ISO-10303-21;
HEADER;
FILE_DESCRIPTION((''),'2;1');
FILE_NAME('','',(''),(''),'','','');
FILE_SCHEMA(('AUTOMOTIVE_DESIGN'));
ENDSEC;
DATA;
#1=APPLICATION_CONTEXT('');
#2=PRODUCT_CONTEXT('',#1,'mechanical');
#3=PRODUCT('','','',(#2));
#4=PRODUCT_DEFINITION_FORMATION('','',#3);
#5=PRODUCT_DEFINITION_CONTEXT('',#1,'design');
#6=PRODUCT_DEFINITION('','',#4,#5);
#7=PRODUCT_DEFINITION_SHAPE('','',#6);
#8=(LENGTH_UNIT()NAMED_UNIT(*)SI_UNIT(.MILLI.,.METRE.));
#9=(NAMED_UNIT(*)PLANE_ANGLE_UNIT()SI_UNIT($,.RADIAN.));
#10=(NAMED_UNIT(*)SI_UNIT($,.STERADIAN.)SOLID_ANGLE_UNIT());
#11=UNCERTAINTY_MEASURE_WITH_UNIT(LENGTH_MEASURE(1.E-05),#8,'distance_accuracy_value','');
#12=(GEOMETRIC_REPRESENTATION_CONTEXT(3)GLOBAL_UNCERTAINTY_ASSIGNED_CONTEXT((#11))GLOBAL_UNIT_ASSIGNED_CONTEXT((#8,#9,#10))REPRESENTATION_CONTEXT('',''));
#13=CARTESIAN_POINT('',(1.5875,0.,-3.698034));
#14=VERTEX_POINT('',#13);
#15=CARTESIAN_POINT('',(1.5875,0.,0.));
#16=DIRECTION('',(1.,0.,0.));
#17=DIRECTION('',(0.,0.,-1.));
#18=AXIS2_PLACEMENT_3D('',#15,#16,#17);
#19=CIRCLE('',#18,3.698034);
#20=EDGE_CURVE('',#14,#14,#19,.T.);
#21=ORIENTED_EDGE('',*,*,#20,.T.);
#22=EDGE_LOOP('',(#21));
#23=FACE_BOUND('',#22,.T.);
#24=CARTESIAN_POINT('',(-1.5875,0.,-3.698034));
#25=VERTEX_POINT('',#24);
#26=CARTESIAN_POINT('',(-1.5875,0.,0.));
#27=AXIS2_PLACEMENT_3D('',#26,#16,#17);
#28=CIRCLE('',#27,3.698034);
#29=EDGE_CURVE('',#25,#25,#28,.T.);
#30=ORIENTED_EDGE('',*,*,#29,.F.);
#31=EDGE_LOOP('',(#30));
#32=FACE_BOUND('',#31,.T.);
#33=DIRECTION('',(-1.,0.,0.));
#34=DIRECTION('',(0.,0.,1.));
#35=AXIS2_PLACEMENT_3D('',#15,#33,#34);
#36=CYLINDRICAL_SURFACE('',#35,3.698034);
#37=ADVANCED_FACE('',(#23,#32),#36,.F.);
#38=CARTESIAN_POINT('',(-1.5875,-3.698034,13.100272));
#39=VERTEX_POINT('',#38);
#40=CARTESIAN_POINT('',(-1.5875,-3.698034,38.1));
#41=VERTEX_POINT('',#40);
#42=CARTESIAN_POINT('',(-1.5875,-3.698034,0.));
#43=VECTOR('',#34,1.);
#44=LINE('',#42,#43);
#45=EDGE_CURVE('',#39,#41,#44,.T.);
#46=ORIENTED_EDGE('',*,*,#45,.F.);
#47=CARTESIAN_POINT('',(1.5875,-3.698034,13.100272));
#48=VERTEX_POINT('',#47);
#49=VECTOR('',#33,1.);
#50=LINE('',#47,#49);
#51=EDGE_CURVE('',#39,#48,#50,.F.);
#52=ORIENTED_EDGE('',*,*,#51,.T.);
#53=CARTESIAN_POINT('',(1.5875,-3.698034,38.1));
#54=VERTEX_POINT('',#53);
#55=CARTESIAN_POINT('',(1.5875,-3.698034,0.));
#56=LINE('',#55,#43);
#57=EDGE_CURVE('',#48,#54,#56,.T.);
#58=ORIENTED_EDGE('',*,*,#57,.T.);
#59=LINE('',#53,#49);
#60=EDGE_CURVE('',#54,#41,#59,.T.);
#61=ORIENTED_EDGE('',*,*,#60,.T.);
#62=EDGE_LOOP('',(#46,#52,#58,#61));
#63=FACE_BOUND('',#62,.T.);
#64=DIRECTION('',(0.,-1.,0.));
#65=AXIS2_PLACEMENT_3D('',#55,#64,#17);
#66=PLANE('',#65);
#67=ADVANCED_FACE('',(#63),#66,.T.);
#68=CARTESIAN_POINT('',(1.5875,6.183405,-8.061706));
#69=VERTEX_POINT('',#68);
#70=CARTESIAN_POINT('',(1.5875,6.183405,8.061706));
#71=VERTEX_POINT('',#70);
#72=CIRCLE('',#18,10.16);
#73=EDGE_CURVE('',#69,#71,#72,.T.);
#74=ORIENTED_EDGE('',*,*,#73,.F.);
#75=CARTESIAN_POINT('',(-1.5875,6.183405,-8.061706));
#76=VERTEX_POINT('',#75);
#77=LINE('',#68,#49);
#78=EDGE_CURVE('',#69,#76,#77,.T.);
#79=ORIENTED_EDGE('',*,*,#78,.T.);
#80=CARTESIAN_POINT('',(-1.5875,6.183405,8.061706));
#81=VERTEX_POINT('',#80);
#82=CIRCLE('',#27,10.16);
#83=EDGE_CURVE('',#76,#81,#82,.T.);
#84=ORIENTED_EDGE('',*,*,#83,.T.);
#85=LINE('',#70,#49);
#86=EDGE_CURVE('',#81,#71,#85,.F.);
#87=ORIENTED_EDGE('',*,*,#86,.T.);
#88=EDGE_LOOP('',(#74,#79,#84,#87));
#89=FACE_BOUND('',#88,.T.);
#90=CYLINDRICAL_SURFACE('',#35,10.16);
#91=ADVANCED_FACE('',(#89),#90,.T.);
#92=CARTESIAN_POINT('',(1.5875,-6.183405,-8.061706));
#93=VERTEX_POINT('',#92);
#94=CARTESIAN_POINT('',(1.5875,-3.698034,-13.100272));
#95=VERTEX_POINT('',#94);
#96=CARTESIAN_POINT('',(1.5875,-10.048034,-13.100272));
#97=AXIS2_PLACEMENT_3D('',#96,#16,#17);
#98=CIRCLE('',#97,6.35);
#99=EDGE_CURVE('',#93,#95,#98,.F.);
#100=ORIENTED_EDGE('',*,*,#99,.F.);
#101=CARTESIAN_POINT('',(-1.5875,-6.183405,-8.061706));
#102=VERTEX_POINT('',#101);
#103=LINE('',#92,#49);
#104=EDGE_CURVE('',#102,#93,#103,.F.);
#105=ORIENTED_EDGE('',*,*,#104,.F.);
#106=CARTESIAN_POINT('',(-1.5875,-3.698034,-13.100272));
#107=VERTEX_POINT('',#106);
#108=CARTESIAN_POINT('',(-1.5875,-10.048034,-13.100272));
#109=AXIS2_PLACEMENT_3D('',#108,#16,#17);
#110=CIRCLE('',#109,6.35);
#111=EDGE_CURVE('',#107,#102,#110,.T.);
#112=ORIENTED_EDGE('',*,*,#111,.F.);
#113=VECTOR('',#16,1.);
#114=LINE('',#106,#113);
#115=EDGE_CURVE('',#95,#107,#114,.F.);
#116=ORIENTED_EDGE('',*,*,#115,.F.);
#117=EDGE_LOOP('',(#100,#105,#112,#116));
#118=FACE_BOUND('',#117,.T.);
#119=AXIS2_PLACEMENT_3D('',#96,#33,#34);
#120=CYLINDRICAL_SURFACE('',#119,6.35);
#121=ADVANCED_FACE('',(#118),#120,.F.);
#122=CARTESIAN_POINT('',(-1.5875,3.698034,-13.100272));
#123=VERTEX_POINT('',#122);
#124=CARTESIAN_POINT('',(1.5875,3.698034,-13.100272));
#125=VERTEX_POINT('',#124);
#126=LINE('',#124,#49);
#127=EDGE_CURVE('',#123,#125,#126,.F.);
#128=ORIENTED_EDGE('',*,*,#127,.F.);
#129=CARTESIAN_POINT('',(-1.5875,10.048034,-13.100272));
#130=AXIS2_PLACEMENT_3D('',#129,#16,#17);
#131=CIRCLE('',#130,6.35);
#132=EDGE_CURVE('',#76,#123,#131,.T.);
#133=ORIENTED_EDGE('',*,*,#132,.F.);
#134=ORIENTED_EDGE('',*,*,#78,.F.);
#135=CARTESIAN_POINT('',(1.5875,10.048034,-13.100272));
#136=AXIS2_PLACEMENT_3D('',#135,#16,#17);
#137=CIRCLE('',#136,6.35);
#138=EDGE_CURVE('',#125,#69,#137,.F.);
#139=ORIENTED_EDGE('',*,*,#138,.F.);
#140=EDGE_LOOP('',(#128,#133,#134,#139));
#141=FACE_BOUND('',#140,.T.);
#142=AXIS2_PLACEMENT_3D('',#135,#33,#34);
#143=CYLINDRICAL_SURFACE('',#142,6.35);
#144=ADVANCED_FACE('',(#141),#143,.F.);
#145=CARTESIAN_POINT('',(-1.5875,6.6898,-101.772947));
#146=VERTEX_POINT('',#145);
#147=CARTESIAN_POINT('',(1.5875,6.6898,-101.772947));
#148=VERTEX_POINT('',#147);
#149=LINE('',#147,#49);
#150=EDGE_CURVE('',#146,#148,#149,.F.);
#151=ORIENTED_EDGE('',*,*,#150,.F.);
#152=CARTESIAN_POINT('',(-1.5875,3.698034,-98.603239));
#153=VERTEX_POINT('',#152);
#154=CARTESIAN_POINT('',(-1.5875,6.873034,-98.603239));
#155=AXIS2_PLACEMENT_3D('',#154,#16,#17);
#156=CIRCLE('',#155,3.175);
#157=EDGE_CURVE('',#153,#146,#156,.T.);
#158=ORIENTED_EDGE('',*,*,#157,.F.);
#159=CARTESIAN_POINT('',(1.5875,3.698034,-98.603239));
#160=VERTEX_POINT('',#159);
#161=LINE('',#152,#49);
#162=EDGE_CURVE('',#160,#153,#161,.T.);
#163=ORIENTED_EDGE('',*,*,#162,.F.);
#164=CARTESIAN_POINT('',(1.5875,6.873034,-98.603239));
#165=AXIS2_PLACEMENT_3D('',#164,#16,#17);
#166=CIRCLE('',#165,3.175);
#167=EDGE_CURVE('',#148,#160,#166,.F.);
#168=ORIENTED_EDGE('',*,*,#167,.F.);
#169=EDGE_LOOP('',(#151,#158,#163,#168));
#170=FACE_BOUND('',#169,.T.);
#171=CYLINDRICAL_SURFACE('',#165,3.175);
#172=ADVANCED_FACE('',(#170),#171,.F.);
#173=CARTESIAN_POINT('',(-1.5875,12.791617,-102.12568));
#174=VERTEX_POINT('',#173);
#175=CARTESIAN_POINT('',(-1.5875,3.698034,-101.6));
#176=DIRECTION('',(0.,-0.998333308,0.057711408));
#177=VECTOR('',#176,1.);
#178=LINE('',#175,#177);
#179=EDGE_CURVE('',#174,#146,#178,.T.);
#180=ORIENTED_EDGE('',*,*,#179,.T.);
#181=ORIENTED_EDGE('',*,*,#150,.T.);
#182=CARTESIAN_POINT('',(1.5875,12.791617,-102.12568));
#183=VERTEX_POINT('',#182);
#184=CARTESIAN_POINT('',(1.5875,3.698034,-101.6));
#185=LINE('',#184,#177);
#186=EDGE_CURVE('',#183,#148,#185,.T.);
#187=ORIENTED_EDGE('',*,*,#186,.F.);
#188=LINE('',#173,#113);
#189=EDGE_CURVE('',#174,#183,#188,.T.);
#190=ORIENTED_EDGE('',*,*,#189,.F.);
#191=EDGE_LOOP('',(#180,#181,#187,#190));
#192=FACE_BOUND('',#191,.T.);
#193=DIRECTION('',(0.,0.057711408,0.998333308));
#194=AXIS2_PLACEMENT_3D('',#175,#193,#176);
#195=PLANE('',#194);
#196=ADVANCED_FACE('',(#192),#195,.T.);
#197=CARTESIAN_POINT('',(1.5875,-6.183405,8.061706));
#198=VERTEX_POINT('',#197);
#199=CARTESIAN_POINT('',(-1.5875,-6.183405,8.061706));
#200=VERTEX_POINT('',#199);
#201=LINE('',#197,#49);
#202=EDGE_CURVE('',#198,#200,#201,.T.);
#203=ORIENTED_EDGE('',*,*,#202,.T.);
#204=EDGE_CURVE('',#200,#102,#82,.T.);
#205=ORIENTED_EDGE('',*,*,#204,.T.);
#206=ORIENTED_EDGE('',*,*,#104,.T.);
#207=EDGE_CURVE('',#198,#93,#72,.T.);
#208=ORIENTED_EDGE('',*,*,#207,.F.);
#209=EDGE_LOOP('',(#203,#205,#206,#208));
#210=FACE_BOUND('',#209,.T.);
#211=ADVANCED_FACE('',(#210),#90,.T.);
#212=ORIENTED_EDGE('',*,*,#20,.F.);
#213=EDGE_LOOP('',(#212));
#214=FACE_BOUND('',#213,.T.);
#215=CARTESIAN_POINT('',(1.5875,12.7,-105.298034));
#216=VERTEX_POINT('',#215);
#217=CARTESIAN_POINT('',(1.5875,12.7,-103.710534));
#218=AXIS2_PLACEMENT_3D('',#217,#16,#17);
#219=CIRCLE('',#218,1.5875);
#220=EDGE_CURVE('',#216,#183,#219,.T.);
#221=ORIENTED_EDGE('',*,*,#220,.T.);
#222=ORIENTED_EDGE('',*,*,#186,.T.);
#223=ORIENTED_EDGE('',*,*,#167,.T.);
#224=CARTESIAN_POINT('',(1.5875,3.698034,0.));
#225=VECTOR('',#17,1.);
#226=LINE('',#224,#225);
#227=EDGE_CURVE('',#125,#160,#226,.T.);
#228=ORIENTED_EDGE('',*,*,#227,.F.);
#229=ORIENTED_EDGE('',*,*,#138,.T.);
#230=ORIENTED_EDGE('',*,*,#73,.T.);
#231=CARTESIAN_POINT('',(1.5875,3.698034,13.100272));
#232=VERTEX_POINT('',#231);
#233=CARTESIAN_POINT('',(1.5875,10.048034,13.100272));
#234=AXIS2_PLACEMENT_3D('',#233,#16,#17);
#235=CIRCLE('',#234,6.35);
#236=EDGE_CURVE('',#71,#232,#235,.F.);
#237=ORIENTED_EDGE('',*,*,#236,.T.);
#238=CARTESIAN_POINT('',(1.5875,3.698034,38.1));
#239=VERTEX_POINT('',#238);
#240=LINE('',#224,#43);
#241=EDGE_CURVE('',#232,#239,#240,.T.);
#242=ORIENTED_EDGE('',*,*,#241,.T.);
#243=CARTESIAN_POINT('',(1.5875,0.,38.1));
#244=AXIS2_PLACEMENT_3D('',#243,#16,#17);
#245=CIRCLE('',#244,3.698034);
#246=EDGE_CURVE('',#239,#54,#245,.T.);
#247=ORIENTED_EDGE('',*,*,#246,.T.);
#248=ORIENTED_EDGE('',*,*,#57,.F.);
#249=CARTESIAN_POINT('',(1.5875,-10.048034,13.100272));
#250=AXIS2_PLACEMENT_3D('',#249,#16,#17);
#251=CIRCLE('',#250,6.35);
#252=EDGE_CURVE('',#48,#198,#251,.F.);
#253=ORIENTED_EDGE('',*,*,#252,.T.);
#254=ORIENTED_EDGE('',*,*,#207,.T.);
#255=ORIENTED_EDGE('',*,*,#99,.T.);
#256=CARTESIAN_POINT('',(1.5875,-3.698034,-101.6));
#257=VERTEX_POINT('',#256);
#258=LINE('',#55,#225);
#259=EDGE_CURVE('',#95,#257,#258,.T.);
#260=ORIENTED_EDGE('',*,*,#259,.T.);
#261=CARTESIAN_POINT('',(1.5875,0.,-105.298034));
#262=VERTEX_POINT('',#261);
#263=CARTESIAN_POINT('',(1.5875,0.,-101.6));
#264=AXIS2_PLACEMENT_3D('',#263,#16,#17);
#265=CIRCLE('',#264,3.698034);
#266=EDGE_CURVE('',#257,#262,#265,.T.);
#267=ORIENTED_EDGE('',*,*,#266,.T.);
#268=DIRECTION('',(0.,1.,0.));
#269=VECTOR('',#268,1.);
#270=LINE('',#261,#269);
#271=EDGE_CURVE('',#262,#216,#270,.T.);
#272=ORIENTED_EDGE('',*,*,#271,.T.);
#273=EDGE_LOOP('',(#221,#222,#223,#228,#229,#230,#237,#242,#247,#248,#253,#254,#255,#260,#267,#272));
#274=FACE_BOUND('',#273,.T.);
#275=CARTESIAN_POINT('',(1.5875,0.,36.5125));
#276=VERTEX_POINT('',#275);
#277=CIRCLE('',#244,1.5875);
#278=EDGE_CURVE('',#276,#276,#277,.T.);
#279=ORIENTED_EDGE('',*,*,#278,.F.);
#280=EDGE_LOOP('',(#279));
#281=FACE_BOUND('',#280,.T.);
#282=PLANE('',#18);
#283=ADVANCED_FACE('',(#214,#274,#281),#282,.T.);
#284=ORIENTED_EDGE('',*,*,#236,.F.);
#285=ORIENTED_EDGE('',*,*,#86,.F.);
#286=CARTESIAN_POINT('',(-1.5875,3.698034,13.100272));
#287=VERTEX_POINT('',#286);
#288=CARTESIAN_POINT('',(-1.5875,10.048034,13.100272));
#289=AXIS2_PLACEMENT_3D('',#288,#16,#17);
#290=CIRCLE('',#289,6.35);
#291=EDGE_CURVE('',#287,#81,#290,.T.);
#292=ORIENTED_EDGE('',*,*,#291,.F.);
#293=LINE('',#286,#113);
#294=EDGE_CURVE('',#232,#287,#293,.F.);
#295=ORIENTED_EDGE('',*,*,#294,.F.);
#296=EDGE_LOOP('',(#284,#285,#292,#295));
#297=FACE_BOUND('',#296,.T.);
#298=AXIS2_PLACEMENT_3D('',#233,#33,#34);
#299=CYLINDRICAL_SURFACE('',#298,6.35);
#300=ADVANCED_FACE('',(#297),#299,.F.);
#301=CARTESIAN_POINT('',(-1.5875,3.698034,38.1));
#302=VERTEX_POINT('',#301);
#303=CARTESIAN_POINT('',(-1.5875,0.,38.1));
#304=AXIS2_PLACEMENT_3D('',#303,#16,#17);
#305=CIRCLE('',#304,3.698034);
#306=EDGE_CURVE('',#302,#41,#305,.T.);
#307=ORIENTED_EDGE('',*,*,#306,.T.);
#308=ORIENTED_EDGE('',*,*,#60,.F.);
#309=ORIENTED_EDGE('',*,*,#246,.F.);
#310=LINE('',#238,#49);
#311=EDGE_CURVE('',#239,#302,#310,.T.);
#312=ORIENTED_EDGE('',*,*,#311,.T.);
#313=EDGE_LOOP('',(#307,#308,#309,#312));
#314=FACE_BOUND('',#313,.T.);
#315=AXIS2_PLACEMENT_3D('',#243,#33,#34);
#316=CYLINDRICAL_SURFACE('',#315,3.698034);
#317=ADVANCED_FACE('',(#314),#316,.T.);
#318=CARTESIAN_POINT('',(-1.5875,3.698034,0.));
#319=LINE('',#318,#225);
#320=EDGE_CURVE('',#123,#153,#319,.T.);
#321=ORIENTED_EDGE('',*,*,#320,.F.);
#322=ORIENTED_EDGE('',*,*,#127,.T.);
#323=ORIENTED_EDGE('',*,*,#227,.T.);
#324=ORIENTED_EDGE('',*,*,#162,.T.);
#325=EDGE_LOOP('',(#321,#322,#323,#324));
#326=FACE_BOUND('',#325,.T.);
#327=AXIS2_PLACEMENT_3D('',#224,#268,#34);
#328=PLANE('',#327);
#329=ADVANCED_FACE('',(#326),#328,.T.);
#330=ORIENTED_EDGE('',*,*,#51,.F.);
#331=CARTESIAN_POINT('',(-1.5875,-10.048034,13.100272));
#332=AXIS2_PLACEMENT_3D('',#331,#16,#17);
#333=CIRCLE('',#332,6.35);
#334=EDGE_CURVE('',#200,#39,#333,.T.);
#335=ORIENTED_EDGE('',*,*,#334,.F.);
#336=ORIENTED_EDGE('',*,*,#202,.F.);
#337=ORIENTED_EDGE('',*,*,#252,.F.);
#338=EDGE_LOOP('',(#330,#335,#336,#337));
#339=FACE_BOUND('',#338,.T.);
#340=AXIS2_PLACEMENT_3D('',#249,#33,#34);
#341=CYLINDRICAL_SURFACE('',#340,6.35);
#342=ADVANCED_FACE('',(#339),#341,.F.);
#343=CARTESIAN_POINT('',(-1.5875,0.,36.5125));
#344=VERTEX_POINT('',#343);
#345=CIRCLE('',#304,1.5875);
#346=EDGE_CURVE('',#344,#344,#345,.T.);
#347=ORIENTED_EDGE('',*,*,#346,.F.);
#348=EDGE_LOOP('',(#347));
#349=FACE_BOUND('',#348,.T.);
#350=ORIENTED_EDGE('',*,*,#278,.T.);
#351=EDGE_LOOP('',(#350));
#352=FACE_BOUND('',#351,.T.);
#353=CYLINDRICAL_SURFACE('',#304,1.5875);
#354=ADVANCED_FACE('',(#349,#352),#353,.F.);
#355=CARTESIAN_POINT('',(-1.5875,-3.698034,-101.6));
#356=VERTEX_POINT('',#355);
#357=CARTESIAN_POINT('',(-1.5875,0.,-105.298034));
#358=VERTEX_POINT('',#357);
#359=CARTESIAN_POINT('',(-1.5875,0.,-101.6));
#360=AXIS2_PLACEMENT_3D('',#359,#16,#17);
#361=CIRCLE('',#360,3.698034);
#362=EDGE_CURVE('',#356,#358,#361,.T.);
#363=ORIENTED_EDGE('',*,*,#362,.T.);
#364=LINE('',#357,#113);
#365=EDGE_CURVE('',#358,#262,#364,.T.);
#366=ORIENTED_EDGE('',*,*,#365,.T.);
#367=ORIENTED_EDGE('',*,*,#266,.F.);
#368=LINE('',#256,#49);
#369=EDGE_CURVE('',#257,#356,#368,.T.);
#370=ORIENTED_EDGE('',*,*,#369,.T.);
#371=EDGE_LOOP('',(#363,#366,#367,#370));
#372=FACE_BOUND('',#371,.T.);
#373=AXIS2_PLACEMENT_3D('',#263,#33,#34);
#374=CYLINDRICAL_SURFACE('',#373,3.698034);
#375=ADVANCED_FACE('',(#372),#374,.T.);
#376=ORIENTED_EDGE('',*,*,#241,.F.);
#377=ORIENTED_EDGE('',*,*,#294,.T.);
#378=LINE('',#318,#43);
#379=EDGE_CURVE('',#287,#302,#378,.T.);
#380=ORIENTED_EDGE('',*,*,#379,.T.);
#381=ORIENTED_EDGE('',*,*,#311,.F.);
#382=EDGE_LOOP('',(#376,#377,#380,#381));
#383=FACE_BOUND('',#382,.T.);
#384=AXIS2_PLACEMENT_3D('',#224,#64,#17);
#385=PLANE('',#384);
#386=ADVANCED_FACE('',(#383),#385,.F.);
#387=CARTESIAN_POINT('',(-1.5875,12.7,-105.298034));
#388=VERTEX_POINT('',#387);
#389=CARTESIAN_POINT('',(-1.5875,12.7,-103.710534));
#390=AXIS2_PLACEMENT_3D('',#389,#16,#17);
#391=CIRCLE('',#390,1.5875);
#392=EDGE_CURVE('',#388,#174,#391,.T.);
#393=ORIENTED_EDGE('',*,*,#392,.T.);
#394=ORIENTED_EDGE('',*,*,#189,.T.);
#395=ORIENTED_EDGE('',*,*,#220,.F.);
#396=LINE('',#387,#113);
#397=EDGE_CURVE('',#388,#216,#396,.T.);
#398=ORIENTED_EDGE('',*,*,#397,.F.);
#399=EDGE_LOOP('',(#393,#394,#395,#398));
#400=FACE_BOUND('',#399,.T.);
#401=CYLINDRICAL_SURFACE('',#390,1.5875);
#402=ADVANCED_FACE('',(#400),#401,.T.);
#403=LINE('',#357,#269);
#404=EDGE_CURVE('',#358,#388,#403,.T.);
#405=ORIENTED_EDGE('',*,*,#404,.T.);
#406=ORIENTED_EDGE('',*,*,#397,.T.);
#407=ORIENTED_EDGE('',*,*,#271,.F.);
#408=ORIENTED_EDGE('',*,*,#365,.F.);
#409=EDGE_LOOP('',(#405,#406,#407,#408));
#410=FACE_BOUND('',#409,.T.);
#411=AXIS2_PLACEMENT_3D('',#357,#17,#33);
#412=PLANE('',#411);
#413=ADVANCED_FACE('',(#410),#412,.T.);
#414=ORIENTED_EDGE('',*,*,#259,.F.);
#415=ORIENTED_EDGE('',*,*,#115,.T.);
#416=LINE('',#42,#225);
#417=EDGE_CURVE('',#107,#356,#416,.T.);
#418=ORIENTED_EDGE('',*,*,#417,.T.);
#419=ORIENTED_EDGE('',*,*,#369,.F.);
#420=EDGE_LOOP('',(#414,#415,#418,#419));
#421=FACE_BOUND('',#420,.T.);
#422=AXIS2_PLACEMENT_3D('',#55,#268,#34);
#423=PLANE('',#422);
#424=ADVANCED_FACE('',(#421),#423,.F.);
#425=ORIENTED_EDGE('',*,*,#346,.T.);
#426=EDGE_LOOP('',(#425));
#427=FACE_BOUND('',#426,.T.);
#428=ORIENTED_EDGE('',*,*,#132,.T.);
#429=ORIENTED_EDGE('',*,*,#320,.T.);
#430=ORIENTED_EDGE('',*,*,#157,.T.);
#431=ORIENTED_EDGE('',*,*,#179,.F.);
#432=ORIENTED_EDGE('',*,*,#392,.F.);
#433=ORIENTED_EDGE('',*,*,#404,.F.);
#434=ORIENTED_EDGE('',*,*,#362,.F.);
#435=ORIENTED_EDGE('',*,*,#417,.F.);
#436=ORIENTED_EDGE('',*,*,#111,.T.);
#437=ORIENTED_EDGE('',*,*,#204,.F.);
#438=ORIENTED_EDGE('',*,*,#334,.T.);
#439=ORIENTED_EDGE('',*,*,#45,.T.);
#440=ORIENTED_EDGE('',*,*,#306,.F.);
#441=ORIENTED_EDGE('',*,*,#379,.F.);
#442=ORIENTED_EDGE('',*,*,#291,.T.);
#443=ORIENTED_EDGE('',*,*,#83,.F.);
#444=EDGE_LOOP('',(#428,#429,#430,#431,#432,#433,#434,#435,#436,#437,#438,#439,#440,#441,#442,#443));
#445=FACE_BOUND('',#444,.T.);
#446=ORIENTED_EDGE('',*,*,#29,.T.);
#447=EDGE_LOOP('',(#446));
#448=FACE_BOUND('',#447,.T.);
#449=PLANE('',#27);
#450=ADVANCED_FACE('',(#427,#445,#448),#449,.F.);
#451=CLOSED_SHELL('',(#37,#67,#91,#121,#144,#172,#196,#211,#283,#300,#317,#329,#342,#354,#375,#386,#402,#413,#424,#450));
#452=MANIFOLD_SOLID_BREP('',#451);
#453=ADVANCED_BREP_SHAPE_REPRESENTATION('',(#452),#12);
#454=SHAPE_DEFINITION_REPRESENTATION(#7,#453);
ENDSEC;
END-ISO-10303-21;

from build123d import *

# Parameters (mm, degrees)
SKETCH1_R               = 3.698033758
BOSS_EXTRUDE1_DEPTH     = 1.5875
FILLET1_R               = 6.35
BOSS_EXTRUDE2_DEPTH     = 1.5875
FILLET2_R               = 3.175
CUT_EXTRUDE1_DEPTH      = 107.31034378
CUT_EXTRUDE1_DEPTH_BACK = 107.31034378
SKETCH3_R               = 1.5875


with BuildPart() as part:
    # Sketch1 → Boss-Extrude1 (new, symmetric)
    with BuildSketch(Plane(origin=(0, 0, 0), x_dir=(0, 0, -1), z_dir=(1, 0, 0))):
        with BuildLine():
            ThreePointArc((-9.463093909, -3.698033758), (0, -10.16), (9.463093909, -3.698033758))
            Line((9.463093909, -3.698033758), (101.6, -3.698033758))
            ThreePointArc((101.6, -3.698033758), (105.298033758, 0), (101.6, 3.698033758))
            Line((101.6, 3.698033758), (9.463093909, 3.698033758))
            ThreePointArc((9.463093909, 3.698033758), (0, 10.16), (-9.463093909, 3.698033758))
            Line((-9.463093909, 3.698033758), (-38.1, 3.698033758))
            ThreePointArc((-38.1, 3.698033758), (-41.798033758, 0), (-38.1, -3.698033758))
            Line((-38.1, -3.698033758), (-9.463093909, -3.698033758))
        make_face()
        Circle(SKETCH1_R, mode=Mode.SUBTRACT)
    extrude(amount=BOSS_EXTRUDE1_DEPTH, both=True)

    # Fillet1
    fillet1_edges = [part.edges().sort_by_distance(p)[0] for p in [
        (0, 3.698033758, -9.463093909),
        (0, -3.698033758, -9.463093909),
        (0, -3.698033758, 9.463093909),
        (0, 3.698033758, 9.463093909),
    ]]
    fillet(fillet1_edges, radius=FILLET1_R)

    # Sketch2 → Boss-Extrude2 (add, symmetric)
    with BuildSketch(Plane(origin=(0, 0, 0), x_dir=(0, 0, -1), z_dir=(1, 0, 0))):
        with BuildLine():
            Line((105.298033758, 0), (105.298033758, 12.7))
            ThreePointArc((105.298033758, 12.7), (103.756361287, 14.286838394), (102.125679632, 12.79161686))
            Line((102.125679632, 12.79161686), (101.6, 3.698033758))
            ThreePointArc((101.6, 3.698033758), (104.214904747, 2.614904747), (105.298033758, 0))
        make_face()
    extrude(amount=BOSS_EXTRUDE2_DEPTH, both=True)

    # Fillet2
    fillet2_edges = [part.edges().sort_by_distance(p)[0] for p in [
        (0, 3.698033758, -101.6),
    ]]
    fillet(fillet2_edges, radius=FILLET2_R)

    # Sketch3 → Cut-Extrude1 (cut, two sides: drawn at the far end of the back side and taken through both)
    with BuildSketch(Plane(origin=(1.5875, 0, 0), x_dir=(0, 0, -1), z_dir=(1, 0, 0)).offset(-CUT_EXTRUDE1_DEPTH_BACK)):
        with Locations((-38.1, 0)):
            Circle(SKETCH3_R)
    extrude(amount=CUT_EXTRUDE1_DEPTH + CUT_EXTRUDE1_DEPTH_BACK, mode=Mode.SUBTRACT)


solid = part.part
